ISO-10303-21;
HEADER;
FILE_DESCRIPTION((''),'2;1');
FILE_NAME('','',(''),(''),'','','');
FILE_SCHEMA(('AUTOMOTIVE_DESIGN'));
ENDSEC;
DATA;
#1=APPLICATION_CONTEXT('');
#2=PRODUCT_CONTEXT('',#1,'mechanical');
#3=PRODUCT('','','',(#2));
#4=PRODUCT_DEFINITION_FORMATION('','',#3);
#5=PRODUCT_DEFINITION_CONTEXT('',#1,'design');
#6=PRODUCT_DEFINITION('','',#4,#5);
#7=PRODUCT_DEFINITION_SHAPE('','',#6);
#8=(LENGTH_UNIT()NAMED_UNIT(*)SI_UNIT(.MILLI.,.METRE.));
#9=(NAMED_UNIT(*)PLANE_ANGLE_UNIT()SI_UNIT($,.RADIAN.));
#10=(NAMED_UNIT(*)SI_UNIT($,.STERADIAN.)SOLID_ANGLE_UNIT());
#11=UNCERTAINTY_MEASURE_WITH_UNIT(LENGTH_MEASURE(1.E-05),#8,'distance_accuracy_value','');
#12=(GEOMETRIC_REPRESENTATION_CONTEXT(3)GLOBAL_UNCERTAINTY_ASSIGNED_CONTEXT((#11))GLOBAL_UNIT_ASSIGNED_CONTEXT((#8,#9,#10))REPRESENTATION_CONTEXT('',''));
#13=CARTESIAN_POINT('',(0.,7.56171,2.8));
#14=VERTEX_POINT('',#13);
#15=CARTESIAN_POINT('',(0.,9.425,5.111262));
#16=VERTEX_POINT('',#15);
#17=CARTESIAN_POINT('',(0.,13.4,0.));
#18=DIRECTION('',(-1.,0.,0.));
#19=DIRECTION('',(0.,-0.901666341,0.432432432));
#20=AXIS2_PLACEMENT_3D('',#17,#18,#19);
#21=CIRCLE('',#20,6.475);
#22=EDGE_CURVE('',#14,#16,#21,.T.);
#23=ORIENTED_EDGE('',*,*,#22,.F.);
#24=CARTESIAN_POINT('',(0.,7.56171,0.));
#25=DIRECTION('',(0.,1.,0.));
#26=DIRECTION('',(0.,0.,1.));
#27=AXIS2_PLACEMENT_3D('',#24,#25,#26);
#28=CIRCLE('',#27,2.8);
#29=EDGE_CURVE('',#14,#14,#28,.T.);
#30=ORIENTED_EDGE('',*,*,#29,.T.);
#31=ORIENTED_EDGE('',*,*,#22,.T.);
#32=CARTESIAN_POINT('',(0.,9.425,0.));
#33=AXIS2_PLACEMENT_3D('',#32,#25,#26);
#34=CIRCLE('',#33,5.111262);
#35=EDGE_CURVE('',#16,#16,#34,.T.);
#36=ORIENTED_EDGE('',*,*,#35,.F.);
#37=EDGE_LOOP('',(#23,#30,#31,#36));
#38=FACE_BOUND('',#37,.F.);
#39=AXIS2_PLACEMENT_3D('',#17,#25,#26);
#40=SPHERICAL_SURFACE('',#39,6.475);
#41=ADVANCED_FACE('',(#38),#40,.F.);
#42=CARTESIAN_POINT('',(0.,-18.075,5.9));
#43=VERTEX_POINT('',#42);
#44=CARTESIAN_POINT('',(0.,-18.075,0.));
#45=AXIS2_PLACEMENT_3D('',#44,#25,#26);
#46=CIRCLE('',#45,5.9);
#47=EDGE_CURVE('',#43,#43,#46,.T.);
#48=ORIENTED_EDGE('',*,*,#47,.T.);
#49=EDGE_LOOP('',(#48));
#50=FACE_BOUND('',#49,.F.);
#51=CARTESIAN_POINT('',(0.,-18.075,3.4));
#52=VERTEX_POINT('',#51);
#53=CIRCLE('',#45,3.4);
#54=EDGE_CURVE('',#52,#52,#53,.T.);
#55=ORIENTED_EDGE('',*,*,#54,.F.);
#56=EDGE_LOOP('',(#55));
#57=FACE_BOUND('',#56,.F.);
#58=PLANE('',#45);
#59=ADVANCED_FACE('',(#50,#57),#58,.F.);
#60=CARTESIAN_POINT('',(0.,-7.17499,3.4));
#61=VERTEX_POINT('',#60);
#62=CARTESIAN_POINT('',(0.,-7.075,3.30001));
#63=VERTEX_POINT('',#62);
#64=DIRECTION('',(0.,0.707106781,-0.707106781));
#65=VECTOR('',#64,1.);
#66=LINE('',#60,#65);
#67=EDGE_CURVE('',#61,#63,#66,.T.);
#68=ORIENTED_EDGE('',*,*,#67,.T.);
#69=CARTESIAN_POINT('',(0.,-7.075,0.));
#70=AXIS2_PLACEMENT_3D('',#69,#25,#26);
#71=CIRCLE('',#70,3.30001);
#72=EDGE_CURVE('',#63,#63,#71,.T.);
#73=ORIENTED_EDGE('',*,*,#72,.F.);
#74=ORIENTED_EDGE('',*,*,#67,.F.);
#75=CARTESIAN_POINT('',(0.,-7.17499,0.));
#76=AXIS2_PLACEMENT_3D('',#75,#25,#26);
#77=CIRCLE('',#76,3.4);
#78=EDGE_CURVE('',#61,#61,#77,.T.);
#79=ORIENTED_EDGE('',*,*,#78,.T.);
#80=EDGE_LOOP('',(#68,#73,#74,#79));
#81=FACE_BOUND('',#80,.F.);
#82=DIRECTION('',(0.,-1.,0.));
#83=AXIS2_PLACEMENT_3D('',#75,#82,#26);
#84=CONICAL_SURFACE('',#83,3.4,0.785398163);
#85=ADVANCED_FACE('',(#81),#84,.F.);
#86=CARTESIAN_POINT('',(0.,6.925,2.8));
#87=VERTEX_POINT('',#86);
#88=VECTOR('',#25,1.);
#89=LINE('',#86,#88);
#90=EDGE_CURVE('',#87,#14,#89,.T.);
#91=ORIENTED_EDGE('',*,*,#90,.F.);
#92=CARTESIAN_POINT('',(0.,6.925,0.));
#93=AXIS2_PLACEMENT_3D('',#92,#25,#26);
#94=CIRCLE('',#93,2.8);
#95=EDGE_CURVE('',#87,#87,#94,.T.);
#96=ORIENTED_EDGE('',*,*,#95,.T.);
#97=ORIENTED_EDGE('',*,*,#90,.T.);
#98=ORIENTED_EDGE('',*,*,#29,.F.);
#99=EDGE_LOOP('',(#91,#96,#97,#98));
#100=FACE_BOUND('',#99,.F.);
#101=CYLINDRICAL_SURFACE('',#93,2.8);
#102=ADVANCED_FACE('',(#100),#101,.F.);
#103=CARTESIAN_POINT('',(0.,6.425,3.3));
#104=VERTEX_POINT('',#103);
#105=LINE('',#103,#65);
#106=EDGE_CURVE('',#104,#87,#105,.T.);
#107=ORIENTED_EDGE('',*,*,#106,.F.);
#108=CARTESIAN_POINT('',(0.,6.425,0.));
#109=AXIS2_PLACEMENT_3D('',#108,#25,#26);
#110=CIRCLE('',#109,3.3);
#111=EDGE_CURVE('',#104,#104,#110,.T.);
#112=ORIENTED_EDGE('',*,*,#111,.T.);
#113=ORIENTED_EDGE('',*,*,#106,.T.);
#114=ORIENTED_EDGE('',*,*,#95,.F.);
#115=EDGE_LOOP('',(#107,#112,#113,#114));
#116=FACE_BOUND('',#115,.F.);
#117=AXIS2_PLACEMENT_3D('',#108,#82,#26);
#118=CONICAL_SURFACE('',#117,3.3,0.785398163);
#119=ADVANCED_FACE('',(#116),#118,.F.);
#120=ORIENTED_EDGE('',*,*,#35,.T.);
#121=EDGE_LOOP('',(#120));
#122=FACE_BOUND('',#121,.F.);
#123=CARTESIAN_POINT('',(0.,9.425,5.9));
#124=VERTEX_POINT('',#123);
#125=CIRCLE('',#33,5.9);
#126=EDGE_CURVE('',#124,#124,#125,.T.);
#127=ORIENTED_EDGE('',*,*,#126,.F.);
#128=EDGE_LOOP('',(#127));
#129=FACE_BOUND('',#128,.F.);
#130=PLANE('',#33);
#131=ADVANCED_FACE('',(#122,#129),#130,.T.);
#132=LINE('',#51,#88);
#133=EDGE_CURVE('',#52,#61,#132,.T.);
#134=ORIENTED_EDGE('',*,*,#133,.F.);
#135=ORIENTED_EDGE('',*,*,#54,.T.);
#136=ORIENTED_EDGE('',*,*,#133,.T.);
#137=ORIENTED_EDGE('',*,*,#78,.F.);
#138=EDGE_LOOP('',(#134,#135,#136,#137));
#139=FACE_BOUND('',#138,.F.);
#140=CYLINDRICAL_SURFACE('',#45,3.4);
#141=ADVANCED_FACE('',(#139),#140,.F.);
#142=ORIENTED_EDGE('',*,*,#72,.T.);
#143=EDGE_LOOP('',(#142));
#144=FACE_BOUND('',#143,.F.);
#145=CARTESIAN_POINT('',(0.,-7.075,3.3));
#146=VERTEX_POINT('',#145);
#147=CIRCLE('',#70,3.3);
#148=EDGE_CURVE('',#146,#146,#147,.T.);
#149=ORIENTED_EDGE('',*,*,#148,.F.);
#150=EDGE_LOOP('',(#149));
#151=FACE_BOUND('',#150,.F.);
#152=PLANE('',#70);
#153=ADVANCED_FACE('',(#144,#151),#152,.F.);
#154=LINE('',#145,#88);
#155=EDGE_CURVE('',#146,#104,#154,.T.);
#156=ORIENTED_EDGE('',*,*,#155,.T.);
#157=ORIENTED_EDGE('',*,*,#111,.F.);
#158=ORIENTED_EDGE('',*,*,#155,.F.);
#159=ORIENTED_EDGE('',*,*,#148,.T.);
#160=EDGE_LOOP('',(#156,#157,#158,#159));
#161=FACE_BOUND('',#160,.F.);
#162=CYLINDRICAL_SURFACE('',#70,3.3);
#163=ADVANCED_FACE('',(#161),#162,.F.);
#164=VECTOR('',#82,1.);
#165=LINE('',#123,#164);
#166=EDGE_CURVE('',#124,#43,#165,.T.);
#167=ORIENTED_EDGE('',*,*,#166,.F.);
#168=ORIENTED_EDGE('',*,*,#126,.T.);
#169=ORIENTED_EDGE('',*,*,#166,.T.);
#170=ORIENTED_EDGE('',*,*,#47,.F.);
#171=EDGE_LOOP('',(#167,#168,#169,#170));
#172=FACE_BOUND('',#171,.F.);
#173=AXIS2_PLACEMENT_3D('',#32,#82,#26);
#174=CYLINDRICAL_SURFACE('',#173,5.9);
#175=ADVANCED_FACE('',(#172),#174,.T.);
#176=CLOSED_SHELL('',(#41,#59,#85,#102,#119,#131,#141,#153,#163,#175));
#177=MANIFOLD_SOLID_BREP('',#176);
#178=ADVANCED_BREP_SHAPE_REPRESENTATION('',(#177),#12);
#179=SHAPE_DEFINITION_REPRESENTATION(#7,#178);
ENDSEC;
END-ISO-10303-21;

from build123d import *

# Parameters (mm, degrees)
F2_SIZE = 0.09999


# Not quite as in the source:
# - a fillet or chamfer is up to 0.001 mm smaller than in the source, because OpenCascade refuses the exact size


with BuildPart() as f1:
    # F0 (on Right) → F1 (revolve)
    with BuildSketch(Plane.YZ):
        with BuildLine():
            ThreePointArc((7.5617104388, 2.8), (8.3591026496, 4.0638625595), (9.425, 5.1112620751))
            Line((9.425, 5.1112620751), (9.425, 5.9))
            Line((9.425, 5.9), (-18.075, 5.9))
            Line((-18.075, 5.9), (-18.075, 3.4))
            Line((-18.075, 3.4), (-7.075, 3.4))
            Line((-7.075, 3.4), (-7.075, 3.3))
            Line((-7.075, 3.3), (-6.425, 3.3))
            Line((-6.425, 3.3), (6.425, 3.3))
            Line((6.425, 3.3), (6.925, 3.3))
            Line((6.925, 3.3), (6.925, 2.8))
            Line((6.925, 2.8), (7.5617104388, 2.8))
        make_face()
        Polygon((6.425, 3.3), (6.925, 2.8), (6.925, 3.3), align=None)
    revolve(axis=Axis((0, 2.1126118954, 0), (0, 1, 0)))

    # F2 (size 0.1 in the source; OpenCascade refuses exactly that, so slightly less here)
    f2_edges = [f1.edges().sort_by_distance(p)[0] for p in [
        (0, -7.075, -3.4),
    ]]
    chamfer(f2_edges, length=F2_SIZE)


solid = f1.part
